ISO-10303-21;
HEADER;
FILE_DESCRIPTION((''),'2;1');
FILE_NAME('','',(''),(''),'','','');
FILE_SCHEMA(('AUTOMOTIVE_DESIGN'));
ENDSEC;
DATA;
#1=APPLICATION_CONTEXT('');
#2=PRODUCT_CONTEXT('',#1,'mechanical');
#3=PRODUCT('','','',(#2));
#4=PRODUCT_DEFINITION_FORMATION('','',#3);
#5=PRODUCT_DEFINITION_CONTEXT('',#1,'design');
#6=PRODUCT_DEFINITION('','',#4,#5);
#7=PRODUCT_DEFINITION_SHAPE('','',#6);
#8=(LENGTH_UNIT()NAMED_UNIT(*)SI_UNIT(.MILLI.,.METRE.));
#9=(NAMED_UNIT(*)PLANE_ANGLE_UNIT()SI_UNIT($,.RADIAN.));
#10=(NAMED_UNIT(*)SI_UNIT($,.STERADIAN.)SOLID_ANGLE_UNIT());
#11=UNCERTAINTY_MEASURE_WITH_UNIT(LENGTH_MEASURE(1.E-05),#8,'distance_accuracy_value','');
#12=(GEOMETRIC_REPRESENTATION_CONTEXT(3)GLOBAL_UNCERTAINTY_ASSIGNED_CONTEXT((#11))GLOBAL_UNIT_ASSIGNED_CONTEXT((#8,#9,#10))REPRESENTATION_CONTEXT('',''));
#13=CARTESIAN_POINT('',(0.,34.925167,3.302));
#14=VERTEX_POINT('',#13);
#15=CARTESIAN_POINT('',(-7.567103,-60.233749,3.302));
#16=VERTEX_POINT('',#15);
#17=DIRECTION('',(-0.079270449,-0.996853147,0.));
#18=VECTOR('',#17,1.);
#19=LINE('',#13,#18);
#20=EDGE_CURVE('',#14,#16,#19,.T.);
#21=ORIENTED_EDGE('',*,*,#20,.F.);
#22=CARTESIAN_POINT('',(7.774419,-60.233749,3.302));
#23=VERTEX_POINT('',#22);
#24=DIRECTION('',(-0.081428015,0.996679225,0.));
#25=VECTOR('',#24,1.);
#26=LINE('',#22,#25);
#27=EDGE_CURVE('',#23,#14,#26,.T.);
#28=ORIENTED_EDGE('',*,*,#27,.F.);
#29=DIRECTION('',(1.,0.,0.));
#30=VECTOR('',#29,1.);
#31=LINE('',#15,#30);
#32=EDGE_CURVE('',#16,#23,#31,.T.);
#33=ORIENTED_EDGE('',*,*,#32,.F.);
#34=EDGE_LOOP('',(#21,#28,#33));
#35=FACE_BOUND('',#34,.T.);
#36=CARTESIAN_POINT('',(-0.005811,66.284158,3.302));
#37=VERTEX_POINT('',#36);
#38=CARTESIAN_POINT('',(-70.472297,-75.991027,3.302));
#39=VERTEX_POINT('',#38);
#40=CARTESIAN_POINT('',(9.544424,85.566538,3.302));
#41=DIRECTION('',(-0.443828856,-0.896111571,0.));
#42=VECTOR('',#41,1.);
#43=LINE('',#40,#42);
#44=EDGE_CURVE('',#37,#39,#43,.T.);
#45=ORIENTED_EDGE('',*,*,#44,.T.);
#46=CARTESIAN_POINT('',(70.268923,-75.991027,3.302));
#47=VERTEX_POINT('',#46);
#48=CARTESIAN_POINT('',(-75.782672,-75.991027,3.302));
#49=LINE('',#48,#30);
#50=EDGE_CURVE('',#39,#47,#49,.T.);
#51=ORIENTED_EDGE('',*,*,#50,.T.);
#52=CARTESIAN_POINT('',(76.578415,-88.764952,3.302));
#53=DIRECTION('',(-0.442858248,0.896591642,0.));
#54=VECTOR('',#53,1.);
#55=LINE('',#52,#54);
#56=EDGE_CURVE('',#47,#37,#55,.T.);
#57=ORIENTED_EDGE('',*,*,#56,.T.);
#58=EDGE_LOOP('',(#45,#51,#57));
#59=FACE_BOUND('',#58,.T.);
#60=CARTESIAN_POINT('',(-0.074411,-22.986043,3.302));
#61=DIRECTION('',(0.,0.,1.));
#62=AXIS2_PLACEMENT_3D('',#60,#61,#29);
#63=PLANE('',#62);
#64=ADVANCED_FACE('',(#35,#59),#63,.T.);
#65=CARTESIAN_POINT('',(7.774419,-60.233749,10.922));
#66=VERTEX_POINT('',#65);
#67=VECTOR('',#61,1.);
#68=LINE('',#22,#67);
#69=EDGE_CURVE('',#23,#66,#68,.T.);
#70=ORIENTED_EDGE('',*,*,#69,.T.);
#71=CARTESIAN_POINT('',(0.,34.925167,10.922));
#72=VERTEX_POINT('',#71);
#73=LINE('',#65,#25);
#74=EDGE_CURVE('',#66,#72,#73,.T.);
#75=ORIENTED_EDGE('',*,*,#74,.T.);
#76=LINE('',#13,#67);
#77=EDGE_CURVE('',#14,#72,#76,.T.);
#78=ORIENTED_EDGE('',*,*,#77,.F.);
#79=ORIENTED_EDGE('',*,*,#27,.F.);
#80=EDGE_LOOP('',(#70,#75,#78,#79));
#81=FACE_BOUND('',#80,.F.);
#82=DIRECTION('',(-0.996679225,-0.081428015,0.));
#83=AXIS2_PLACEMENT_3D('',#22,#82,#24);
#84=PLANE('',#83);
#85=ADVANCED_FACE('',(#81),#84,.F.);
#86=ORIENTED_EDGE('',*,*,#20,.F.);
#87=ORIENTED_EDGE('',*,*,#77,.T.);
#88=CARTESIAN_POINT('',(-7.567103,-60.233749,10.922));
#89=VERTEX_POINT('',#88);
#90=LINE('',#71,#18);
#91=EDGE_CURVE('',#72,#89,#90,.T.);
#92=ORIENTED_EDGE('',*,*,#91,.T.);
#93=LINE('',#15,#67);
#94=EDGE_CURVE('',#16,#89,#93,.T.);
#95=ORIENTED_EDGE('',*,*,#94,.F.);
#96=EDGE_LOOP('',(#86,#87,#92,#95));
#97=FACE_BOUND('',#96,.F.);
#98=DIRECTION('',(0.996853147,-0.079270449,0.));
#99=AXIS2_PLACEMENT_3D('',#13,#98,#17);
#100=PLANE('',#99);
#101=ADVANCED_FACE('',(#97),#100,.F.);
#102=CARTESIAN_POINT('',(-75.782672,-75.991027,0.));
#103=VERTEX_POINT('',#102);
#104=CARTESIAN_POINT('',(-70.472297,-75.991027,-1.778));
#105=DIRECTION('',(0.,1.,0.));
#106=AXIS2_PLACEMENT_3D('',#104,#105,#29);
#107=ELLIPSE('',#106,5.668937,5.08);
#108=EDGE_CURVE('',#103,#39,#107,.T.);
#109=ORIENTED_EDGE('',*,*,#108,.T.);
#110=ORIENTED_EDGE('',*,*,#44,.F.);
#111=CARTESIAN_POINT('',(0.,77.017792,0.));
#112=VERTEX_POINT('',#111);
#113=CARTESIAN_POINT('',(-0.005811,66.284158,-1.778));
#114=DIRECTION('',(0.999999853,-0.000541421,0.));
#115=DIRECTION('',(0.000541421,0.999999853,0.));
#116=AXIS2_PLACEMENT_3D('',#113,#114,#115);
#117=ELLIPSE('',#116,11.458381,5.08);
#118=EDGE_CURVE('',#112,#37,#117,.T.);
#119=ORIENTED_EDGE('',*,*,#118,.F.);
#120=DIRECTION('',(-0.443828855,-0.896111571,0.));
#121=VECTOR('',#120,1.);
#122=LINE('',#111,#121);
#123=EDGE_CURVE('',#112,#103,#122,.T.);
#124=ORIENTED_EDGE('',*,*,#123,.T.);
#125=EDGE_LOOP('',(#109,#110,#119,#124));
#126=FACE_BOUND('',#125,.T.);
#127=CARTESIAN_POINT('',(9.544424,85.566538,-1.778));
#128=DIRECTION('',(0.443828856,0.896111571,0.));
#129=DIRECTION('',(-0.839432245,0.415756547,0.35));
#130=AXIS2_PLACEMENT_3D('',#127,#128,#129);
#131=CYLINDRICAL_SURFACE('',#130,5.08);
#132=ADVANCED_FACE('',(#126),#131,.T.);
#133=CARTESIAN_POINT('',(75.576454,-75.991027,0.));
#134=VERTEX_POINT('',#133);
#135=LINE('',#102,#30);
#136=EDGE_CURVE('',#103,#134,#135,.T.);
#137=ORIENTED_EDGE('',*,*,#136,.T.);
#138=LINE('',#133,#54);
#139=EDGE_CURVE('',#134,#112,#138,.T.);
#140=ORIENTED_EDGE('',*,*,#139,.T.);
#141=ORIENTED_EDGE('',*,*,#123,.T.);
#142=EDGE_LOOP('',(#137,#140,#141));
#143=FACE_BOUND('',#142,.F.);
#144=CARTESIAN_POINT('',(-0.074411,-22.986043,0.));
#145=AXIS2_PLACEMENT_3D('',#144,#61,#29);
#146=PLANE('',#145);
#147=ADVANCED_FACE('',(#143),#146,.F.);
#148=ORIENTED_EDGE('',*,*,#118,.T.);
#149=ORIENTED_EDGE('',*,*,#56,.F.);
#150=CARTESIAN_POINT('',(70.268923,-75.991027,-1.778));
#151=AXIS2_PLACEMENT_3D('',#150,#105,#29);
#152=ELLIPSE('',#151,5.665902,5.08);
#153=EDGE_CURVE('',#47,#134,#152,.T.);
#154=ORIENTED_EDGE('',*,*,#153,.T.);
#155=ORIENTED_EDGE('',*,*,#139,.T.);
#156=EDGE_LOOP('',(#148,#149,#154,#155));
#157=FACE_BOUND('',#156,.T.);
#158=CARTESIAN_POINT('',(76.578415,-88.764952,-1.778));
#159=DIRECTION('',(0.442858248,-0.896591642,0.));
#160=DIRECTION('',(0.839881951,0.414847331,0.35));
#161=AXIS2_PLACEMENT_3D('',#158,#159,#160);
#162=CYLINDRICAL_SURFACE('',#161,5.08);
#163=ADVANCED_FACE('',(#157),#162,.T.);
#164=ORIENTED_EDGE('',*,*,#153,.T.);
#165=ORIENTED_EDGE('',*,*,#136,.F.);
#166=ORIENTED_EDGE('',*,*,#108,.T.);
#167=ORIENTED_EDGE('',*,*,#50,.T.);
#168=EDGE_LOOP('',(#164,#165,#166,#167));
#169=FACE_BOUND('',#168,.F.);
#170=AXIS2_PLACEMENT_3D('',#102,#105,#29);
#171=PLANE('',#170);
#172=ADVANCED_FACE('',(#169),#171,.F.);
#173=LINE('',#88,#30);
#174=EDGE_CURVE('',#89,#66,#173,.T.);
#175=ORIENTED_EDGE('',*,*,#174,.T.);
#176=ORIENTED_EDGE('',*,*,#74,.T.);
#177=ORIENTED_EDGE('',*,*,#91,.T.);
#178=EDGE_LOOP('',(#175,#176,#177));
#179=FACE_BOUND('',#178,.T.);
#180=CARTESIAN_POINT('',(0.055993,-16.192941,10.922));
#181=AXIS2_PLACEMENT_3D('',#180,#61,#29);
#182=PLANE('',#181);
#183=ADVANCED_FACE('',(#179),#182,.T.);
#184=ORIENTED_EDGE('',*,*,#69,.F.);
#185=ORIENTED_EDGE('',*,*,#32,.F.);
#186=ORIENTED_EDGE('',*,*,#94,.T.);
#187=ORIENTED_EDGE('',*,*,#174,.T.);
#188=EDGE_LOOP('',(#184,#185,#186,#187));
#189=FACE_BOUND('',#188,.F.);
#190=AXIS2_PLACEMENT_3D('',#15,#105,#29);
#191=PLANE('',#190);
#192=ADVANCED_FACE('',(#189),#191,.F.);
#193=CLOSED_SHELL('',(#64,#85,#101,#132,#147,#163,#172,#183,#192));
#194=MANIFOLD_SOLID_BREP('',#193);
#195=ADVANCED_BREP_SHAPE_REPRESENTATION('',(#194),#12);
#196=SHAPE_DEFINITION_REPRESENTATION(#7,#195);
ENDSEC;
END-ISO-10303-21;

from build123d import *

# Parameters (mm, degrees)
F1_DEPTH    = 3.302
F2_T1_DEPTH = 194.5409515442
F2_T3_DEPTH = 194.4495264649
F4_DEPTH    = 7.62


# Not quite as in the source:
# - a fillet or chamfer that OpenCascade refuses, or shapes differently, is made with other operations: its cross-section is extruded or revolved along the edge and cut away or added


with BuildPart() as f1:
    # F0 (on Top) → F1 (new body)
    with BuildSketch(Plane.XY):
        Polygon((75.576454401, -75.9910270572), (0, 77.0177915692), (-75.7826715708, -75.9910270572), align=None)
    extrude(amount=F1_DEPTH)

    # F2: fillet of radius 5.08 on 2 edges, made by hand

    # F2_s2 → F2_t1 (cut)
    with BuildSketch(Plane(origin=(35.9116375184, 72.5073043447, 0), x_dir=(0, 0, 1), z_dir=(-0.4438288555, -0.8961115706, 0))):
        with BuildLine():
            ThreePointArc((0, 34.1827182836), (2.3956458882, 32.3200753886), (3.302, 29.4240298088))
            Line((3.302, 29.4240298088), (3.302, 34.1827182836))
            Line((3.302, 34.1827182836), (0, 34.1827182836))
        make_face()
    extrude(amount=F2_T1_DEPTH, mode=Mode.SUBTRACT)

    # F2_s4 → F2_t3 (cut)
    with BuildSketch(Plane(origin=(50.2640998489, -101.7625211206, 0), x_dir=(0, 0, 1), z_dir=(-0.4428582479, 0.8965916418, 0))):
        with BuildLine():
            ThreePointArc((0, 34.1079642346), (2.3956458882, 32.2453213396), (3.302, 29.3492757599))
            Line((3.302, 29.3492757599), (3.302, 34.1079642346))
            Line((3.302, 34.1079642346), (0, 34.1079642346))
        make_face()
    extrude(amount=F2_T3_DEPTH, mode=Mode.SUBTRACT)

    # F3 (on face) → F4 (join)
    with BuildSketch(Plane.XY.offset(3.302)):
        Polygon((7.7744186856, -60.2337494493), (0, 34.9251665175), (-7.5671025552, -60.2337494493), align=None)
    extrude(amount=F4_DEPTH)


solid = f1.part
